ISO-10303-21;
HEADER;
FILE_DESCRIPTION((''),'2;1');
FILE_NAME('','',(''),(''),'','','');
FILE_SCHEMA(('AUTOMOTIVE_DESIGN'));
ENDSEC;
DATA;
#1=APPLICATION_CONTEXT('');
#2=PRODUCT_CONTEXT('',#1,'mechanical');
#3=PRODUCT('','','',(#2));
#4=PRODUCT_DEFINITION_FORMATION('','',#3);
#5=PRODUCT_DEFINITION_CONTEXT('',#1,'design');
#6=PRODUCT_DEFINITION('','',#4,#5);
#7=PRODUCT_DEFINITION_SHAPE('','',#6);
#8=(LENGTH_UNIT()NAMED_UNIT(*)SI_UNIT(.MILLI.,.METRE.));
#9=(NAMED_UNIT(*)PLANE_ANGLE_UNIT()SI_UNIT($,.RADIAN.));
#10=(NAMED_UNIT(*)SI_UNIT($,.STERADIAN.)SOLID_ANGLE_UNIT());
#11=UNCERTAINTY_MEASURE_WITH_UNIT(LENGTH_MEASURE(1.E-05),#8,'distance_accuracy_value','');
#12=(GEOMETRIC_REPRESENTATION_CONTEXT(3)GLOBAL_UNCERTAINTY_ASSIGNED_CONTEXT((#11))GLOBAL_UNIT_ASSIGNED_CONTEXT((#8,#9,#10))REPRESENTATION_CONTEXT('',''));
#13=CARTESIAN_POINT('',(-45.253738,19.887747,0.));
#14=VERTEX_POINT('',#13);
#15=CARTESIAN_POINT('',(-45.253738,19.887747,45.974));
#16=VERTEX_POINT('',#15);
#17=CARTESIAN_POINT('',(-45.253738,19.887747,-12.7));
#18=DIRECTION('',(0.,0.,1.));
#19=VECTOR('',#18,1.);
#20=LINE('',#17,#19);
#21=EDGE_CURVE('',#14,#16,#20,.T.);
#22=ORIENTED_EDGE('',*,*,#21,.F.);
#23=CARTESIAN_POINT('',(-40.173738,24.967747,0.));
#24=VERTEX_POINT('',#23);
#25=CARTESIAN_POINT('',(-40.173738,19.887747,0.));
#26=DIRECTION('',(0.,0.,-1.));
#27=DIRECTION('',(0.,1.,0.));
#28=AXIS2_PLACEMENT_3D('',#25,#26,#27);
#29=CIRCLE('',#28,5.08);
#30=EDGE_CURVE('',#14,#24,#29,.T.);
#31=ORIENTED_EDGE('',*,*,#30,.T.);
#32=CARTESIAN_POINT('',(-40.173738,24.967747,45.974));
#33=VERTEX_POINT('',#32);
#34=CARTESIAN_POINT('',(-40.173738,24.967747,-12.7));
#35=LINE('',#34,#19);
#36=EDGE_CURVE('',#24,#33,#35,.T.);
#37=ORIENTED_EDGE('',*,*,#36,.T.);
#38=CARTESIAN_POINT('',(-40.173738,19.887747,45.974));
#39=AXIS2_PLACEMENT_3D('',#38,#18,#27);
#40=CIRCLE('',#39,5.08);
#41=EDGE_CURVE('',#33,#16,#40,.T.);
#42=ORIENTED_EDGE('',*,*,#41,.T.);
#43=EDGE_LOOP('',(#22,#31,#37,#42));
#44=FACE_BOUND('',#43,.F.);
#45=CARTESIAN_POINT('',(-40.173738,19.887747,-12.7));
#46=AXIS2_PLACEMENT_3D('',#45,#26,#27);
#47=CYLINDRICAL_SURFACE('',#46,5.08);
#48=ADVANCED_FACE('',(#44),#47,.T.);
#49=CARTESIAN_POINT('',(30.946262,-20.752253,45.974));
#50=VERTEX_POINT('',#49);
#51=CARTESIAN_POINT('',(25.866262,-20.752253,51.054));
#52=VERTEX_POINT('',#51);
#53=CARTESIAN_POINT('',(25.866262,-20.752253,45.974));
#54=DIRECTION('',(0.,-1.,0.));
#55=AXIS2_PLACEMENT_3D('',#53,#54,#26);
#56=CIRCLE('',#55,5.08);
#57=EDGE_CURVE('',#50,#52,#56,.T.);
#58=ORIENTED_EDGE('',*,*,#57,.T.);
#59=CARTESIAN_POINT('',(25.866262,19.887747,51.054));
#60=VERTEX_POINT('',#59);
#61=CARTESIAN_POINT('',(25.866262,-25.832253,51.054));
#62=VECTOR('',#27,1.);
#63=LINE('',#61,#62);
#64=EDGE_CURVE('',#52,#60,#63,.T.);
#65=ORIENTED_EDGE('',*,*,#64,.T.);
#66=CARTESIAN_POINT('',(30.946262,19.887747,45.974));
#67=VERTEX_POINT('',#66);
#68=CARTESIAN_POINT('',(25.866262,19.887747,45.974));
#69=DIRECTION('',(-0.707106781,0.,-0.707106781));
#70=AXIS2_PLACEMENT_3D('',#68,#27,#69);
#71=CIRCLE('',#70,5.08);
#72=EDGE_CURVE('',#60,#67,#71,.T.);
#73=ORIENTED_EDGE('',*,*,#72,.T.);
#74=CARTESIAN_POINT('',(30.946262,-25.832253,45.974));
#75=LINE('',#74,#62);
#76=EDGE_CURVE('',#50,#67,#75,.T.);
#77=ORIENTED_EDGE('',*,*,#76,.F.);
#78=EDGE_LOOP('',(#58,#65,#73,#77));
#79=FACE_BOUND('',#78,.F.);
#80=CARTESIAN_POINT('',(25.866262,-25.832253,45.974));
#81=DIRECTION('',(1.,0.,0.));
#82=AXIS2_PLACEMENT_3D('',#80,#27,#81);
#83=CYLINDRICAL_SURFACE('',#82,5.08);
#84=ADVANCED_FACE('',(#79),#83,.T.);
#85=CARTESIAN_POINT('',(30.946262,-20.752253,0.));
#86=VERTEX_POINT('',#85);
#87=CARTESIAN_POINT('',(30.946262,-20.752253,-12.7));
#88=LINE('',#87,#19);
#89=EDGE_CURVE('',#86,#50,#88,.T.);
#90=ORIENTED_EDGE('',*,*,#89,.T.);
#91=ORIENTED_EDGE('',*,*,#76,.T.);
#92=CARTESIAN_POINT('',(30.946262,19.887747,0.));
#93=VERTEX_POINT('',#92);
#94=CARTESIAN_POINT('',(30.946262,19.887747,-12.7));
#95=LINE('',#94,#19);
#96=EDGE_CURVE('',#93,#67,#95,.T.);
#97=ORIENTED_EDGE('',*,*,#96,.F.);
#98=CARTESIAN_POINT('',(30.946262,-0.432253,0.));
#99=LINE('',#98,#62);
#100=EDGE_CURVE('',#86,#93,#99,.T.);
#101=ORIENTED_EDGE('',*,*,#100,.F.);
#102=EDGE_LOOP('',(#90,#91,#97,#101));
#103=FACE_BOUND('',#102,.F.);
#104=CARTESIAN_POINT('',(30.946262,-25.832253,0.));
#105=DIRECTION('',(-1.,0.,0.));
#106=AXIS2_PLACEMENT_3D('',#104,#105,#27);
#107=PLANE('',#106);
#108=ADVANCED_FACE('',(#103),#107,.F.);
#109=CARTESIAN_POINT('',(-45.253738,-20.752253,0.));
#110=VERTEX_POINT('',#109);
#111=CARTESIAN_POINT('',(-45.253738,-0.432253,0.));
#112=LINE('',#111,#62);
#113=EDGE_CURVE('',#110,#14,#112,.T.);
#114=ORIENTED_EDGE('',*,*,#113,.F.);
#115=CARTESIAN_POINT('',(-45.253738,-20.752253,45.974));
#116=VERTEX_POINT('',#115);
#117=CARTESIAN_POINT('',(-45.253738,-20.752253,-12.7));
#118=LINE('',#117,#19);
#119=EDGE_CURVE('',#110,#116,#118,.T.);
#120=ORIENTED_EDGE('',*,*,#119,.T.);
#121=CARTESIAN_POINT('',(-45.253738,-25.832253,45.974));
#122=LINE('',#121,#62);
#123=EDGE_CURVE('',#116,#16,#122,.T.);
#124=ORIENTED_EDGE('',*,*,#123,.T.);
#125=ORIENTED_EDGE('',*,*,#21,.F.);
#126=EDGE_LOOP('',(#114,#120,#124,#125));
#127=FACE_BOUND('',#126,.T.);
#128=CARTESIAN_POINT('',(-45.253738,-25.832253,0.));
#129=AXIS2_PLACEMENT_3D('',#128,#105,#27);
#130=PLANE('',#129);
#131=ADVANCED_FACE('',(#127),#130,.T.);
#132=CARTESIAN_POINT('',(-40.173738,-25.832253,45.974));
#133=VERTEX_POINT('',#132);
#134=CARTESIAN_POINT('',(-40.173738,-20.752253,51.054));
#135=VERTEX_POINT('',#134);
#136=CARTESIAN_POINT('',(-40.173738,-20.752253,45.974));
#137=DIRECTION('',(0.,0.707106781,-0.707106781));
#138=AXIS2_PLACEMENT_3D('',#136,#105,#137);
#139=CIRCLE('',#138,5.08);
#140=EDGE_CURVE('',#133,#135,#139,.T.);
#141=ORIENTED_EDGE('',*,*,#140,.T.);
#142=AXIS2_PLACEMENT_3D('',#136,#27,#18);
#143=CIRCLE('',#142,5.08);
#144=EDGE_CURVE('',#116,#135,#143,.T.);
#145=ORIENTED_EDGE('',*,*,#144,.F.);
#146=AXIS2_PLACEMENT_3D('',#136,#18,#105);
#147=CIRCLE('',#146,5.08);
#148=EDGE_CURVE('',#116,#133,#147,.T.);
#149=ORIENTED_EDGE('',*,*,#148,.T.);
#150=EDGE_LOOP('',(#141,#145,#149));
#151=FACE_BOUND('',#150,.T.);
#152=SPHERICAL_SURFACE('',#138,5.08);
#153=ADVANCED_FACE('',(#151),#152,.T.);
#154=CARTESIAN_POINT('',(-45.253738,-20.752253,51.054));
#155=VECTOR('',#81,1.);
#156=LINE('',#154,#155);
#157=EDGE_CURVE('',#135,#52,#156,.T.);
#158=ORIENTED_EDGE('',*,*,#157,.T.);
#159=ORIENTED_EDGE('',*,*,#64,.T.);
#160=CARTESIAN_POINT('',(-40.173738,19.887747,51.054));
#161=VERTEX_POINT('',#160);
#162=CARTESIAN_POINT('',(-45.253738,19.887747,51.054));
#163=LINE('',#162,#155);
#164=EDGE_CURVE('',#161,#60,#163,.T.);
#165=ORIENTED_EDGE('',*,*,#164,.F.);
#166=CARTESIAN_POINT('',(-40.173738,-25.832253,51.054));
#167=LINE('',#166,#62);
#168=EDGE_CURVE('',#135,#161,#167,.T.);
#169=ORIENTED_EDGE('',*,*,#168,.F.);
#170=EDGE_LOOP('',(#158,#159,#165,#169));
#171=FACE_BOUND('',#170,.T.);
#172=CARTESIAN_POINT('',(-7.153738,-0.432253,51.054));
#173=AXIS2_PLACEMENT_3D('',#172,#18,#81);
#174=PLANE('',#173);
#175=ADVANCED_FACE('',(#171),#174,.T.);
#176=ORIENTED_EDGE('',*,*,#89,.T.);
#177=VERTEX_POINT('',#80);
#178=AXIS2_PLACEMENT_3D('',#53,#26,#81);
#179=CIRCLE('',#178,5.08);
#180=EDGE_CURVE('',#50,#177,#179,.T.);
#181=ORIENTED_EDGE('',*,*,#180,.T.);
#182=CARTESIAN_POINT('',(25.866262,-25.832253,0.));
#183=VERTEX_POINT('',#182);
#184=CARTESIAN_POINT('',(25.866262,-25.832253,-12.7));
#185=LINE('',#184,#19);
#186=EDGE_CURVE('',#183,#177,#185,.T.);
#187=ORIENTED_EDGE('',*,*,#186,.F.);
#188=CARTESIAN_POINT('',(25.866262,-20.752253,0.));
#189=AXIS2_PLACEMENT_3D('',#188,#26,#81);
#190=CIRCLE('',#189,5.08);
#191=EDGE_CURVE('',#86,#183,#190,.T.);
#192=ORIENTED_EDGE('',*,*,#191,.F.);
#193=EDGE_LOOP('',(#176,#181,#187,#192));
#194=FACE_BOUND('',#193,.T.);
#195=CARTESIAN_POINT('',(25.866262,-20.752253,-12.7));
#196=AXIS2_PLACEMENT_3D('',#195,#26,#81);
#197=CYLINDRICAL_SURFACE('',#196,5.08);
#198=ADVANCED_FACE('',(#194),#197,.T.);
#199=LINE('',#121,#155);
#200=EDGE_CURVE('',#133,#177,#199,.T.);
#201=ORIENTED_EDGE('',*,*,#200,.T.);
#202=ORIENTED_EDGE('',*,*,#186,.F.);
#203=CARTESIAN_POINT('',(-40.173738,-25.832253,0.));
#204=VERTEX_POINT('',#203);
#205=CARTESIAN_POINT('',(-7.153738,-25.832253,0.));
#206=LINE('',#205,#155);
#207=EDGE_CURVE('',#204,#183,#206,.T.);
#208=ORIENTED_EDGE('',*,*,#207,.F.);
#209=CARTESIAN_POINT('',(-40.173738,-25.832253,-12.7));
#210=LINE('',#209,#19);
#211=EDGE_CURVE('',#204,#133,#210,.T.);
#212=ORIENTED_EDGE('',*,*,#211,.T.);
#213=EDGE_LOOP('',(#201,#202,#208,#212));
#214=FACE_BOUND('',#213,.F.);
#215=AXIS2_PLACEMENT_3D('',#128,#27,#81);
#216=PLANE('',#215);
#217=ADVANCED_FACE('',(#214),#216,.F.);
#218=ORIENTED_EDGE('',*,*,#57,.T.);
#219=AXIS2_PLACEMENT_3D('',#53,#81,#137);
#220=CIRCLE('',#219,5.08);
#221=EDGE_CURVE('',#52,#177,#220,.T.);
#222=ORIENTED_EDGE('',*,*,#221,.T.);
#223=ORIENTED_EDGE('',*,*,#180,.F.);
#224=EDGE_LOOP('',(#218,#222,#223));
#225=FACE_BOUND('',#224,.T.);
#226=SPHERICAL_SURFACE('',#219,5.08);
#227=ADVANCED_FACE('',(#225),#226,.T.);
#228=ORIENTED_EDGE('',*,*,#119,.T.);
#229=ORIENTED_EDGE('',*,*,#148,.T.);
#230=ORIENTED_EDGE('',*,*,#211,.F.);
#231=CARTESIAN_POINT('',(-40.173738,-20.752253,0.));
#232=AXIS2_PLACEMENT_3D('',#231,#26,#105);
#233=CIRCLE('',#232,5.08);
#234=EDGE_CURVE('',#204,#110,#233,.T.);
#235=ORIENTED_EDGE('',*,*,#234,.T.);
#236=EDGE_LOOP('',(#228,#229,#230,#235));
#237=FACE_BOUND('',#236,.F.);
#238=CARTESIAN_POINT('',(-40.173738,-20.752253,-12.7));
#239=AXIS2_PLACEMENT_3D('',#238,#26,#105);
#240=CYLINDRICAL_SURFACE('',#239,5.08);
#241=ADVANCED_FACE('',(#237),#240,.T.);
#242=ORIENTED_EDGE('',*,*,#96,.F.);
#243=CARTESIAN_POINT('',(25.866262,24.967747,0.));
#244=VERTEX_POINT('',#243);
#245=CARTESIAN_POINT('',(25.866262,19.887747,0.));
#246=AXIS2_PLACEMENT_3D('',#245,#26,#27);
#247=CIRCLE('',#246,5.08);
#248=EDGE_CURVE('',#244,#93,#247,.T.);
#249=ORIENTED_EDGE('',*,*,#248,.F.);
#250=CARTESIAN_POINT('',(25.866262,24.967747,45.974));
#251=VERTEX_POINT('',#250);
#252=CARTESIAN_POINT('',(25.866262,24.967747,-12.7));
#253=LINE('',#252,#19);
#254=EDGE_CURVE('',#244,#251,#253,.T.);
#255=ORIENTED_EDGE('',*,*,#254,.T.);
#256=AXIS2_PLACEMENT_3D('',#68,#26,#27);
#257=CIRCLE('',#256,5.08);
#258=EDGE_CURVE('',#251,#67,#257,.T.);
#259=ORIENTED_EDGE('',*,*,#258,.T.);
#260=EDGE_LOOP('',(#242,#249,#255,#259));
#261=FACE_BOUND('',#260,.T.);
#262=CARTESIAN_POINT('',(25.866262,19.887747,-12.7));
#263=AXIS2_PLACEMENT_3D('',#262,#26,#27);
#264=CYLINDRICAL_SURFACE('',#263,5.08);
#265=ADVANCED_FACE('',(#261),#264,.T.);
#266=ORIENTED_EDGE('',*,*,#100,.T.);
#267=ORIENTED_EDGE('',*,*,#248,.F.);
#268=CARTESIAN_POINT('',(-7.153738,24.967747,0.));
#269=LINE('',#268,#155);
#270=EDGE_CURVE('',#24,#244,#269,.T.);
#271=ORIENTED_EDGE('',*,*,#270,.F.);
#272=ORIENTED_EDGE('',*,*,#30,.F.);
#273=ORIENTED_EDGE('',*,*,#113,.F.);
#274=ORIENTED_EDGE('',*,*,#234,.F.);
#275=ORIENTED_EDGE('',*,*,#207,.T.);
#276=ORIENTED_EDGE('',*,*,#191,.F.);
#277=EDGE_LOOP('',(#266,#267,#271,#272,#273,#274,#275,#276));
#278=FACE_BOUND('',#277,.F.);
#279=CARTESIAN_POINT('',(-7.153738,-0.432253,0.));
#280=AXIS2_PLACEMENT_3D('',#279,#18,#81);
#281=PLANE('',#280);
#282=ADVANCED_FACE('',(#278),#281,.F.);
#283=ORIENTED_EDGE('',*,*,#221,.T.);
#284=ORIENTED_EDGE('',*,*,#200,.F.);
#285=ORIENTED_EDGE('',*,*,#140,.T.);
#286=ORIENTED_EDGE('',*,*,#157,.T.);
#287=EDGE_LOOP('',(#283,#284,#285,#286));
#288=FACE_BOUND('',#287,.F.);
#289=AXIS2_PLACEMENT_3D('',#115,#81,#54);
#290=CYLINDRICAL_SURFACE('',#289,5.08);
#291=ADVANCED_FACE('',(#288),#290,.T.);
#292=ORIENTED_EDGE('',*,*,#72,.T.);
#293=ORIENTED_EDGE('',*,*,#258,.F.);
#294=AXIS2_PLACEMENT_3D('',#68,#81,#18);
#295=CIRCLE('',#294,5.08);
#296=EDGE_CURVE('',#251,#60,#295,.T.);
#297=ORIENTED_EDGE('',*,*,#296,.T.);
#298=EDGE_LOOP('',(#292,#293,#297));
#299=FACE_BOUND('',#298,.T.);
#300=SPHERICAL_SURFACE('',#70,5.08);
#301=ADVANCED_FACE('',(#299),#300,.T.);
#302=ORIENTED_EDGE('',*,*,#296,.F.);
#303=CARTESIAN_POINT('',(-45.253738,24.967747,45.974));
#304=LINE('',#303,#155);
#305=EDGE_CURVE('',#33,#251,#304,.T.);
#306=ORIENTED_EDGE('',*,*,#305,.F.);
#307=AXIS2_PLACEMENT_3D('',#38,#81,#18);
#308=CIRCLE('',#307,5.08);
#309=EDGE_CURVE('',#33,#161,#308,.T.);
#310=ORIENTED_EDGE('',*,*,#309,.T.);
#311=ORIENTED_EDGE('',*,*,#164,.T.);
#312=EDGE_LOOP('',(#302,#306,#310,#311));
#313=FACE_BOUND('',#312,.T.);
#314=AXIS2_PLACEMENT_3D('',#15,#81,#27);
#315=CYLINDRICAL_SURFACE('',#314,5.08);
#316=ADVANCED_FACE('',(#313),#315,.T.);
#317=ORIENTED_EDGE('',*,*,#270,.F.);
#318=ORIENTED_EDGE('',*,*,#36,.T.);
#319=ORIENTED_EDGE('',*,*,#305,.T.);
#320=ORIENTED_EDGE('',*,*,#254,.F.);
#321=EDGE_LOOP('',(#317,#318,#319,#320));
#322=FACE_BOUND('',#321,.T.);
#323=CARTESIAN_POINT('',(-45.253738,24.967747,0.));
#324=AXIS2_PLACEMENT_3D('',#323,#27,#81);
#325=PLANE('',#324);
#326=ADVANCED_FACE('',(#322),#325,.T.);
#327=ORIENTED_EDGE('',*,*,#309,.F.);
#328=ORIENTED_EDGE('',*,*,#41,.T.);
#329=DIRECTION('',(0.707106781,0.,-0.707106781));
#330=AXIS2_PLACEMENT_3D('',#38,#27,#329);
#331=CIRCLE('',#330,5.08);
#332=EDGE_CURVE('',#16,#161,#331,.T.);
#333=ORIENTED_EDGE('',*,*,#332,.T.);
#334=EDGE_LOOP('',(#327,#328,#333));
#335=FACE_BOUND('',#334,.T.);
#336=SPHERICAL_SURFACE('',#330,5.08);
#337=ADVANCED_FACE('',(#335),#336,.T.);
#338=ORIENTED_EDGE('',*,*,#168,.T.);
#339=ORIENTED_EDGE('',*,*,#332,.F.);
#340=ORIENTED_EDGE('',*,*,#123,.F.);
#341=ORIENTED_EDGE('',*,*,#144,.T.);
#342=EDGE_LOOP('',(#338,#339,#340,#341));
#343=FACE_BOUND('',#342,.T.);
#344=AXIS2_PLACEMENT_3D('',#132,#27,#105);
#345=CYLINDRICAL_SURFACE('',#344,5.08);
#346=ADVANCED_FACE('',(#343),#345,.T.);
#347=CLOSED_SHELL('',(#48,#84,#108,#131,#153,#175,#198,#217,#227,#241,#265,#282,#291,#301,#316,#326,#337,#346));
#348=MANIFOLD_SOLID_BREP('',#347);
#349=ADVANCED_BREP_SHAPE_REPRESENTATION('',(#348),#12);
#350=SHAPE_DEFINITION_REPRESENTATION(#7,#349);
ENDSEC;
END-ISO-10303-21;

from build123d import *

# Parameters (mm, degrees)
F0_W         = 76.2
F0_H         = 50.8
F1_DEPTH     = 51.054
F2_R         = 5.08
F3_T1_DEPTH  = 58.674
F3_S5_W      = 5.08
F3_S5_H      = 5.08
F3_T6_DEPTH  = 5.08
F3_S11_W     = 5.08
F3_S11_H     = 5.08
F3_T12_DEPTH = 5.08
F3_S17_W     = 5.08
F3_S17_H     = 5.08
F3_T18_DEPTH = 5.08
F3_S23_W     = 5.08
F3_S23_H     = 5.08
F3_T24_DEPTH = 5.08


# Not quite as in the source:
# - a fillet or chamfer that OpenCascade refuses, or shapes differently, is made with other operations: its cross-section is extruded or revolved along the edge and cut away or added


with BuildPart() as f1:
    # F0 (on Top) → F1 (new body)
    with BuildSketch(Plane.XY):
        with Locations((-7.1537382901, -0.4322529342)):
            Rectangle(F0_W, F0_H)
    extrude(amount=F1_DEPTH)

    # F2
    f2_edges = [f1.edges().sort_by_distance(p)[0] for p in [
        (-7.153738, 24.967747, 51.054),
        (-45.253738, -0.432253, 51.054),
        (-7.153738, -25.832253, 51.054),
        (30.946262, -0.432253, 51.054),
    ]]
    fillet(f2_edges, radius=F2_R)

    # F3: fillet of radius 5.08 on 4 edges, made by hand

    # F3_s2 → F3_t1 (cut)
    with BuildSketch(Plane.XY.offset(-12.7)):
        with BuildLine():
            ThreePointArc((-40.1737382901, 24.9677470658), (-43.7658407385, 23.4798495143), (-45.2537382901, 19.8877470658))
            Line((-45.2537382901, 19.8877470658), (-45.2537382901, 24.9677470658))
            Line((-45.2537382901, 24.9677470658), (-40.1737382901, 24.9677470658))
        make_face()
        with BuildLine():
            ThreePointArc((-45.2537382901, -20.7522529342), (-43.7658407385, -24.3443553826), (-40.1737382901, -25.8322529342))
            Line((-40.1737382901, -25.8322529342), (-45.2537382901, -25.8322529342))
            Line((-45.2537382901, -25.8322529342), (-45.2537382901, -20.7522529342))
        make_face()
        with BuildLine():
            ThreePointArc((30.9462617099, -20.7522529342), (29.4583641584, -24.3443553826), (25.8662617099, -25.8322529342))
            Line((25.8662617099, -25.8322529342), (30.9462617099, -25.8322529342))
            Line((30.9462617099, -25.8322529342), (30.9462617099, -20.7522529342))
        make_face()
        with BuildLine():
            ThreePointArc((25.8662617099, 24.9677470658), (29.4583641584, 23.4798495143), (30.9462617099, 19.8877470658))
            Line((30.9462617099, 19.8877470658), (30.9462617099, 24.9677470658))
            Line((30.9462617099, 24.9677470658), (25.8662617099, 24.9677470658))
        make_face()
    extrude(amount=F3_T1_DEPTH, mode=Mode.SUBTRACT)


with BuildPart() as f3_tool4:
    # F3_s5 → F3_t6 (new body)
    with BuildSketch(Plane.XZ.offset(-19.8877470658)):
        with Locations((28.4062617099, 48.514)):
            Rectangle(F3_S5_W, F3_S5_H)
    extrude(amount=-F3_T6_DEPTH)

    # F3_s7 → F3_t8 (revolve, cut)
    with BuildSketch(Plane(origin=(25.8662617099, 19.8877470658, 45.974), x_dir=(-0.7071067812, 0, -0.7071067812), z_dir=(0.7071067812, 0, -0.7071067812))):
        with BuildLine():
            ThreePointArc((0, -5.08), (5.08, 0), (0, 5.08))
            Line((0, 5.08), (0, -5.08))
        make_face()
    revolve(axis=Axis((25.8662617099, 19.8877470658, 45.974), (0, 1, 0)), mode=Mode.SUBTRACT)


with BuildPart() as f1_1:
    add(f1.part)

    # F3_t3: cut F3_tool4
    add(f3_tool4.part, mode=Mode.SUBTRACT)


with BuildPart() as f3_tool10:
    # F3_s11 → F3_t12 (new body)
    with BuildSketch(Plane.YZ.offset(25.8662617099)):
        with Locations((-23.2922529342, 48.514)):
            Rectangle(F3_S11_W, F3_S11_H)
    extrude(amount=F3_T12_DEPTH)

    # F3_s13 → F3_t14 (revolve, cut)
    with BuildSketch(Plane(origin=(25.8662617099, -20.7522529342, 45.974), x_dir=(0, 0.7071067812, -0.7071067812), z_dir=(0, -0.7071067812, -0.7071067812))):
        with BuildLine():
            ThreePointArc((0, -5.08), (5.08, 0), (0, 5.08))
            Line((0, 5.08), (0, -5.08))
        make_face()
    revolve(axis=Axis((25.8662617099, -20.7522529342, 45.974), (1, 0, 0)), mode=Mode.SUBTRACT)


with BuildPart() as f1_2:
    add(f1_1.part)

    # F3_t9: cut F3_tool10
    add(f3_tool10.part, mode=Mode.SUBTRACT)


with BuildPart() as f3_tool16:
    # F3_s17 → F3_t18 (new body)
    with BuildSketch(Plane.YZ.offset(-40.1737382901)):
        with Locations((-23.2922529342, 48.514)):
            Rectangle(F3_S17_W, F3_S17_H)
    extrude(amount=-F3_T18_DEPTH)

    # F3_s19 → F3_t20 (revolve, cut)
    with BuildSketch(Plane(origin=(-40.1737382901, -20.7522529342, 45.974), x_dir=(0, 0.7071067812, -0.7071067812), z_dir=(0, 0.7071067812, 0.7071067812))):
        with BuildLine():
            ThreePointArc((0, -5.08), (5.08, 0), (0, 5.08))
            Line((0, 5.08), (0, -5.08))
        make_face()
    revolve(axis=Axis((-40.1737382901, -20.7522529342, 45.974), (-1, 0, 0)), mode=Mode.SUBTRACT)


with BuildPart() as f1_3:
    add(f1_2.part)

    # F3_t15: cut F3_tool16
    add(f3_tool16.part, mode=Mode.SUBTRACT)


with BuildPart() as f3_tool22:
    # F3_s23 → F3_t24 (new body)
    with BuildSketch(Plane.XZ.offset(-19.8877470658)):
        with Locations((-42.7137382901, 48.514)):
            Rectangle(F3_S23_W, F3_S23_H)
    extrude(amount=-F3_T24_DEPTH)

    # F3_s25 → F3_t26 (revolve, cut)
    with BuildSketch(Plane(origin=(-40.1737382901, 19.8877470658, 45.974), x_dir=(0.7071067812, 0, -0.7071067812), z_dir=(0.7071067812, 0, 0.7071067812))):
        with BuildLine():
            ThreePointArc((0, -5.08), (5.08, 0), (0, 5.08))
            Line((0, 5.08), (0, -5.08))
        make_face()
    revolve(axis=Axis((-40.1737382901, 19.8877470658, 45.974), (0, 1, 0)), mode=Mode.SUBTRACT)


with BuildPart() as f1_4:
    add(f1_3.part)

    # F3_t21: cut F3_tool22
    add(f3_tool22.part, mode=Mode.SUBTRACT)


solid = f1_4.part
